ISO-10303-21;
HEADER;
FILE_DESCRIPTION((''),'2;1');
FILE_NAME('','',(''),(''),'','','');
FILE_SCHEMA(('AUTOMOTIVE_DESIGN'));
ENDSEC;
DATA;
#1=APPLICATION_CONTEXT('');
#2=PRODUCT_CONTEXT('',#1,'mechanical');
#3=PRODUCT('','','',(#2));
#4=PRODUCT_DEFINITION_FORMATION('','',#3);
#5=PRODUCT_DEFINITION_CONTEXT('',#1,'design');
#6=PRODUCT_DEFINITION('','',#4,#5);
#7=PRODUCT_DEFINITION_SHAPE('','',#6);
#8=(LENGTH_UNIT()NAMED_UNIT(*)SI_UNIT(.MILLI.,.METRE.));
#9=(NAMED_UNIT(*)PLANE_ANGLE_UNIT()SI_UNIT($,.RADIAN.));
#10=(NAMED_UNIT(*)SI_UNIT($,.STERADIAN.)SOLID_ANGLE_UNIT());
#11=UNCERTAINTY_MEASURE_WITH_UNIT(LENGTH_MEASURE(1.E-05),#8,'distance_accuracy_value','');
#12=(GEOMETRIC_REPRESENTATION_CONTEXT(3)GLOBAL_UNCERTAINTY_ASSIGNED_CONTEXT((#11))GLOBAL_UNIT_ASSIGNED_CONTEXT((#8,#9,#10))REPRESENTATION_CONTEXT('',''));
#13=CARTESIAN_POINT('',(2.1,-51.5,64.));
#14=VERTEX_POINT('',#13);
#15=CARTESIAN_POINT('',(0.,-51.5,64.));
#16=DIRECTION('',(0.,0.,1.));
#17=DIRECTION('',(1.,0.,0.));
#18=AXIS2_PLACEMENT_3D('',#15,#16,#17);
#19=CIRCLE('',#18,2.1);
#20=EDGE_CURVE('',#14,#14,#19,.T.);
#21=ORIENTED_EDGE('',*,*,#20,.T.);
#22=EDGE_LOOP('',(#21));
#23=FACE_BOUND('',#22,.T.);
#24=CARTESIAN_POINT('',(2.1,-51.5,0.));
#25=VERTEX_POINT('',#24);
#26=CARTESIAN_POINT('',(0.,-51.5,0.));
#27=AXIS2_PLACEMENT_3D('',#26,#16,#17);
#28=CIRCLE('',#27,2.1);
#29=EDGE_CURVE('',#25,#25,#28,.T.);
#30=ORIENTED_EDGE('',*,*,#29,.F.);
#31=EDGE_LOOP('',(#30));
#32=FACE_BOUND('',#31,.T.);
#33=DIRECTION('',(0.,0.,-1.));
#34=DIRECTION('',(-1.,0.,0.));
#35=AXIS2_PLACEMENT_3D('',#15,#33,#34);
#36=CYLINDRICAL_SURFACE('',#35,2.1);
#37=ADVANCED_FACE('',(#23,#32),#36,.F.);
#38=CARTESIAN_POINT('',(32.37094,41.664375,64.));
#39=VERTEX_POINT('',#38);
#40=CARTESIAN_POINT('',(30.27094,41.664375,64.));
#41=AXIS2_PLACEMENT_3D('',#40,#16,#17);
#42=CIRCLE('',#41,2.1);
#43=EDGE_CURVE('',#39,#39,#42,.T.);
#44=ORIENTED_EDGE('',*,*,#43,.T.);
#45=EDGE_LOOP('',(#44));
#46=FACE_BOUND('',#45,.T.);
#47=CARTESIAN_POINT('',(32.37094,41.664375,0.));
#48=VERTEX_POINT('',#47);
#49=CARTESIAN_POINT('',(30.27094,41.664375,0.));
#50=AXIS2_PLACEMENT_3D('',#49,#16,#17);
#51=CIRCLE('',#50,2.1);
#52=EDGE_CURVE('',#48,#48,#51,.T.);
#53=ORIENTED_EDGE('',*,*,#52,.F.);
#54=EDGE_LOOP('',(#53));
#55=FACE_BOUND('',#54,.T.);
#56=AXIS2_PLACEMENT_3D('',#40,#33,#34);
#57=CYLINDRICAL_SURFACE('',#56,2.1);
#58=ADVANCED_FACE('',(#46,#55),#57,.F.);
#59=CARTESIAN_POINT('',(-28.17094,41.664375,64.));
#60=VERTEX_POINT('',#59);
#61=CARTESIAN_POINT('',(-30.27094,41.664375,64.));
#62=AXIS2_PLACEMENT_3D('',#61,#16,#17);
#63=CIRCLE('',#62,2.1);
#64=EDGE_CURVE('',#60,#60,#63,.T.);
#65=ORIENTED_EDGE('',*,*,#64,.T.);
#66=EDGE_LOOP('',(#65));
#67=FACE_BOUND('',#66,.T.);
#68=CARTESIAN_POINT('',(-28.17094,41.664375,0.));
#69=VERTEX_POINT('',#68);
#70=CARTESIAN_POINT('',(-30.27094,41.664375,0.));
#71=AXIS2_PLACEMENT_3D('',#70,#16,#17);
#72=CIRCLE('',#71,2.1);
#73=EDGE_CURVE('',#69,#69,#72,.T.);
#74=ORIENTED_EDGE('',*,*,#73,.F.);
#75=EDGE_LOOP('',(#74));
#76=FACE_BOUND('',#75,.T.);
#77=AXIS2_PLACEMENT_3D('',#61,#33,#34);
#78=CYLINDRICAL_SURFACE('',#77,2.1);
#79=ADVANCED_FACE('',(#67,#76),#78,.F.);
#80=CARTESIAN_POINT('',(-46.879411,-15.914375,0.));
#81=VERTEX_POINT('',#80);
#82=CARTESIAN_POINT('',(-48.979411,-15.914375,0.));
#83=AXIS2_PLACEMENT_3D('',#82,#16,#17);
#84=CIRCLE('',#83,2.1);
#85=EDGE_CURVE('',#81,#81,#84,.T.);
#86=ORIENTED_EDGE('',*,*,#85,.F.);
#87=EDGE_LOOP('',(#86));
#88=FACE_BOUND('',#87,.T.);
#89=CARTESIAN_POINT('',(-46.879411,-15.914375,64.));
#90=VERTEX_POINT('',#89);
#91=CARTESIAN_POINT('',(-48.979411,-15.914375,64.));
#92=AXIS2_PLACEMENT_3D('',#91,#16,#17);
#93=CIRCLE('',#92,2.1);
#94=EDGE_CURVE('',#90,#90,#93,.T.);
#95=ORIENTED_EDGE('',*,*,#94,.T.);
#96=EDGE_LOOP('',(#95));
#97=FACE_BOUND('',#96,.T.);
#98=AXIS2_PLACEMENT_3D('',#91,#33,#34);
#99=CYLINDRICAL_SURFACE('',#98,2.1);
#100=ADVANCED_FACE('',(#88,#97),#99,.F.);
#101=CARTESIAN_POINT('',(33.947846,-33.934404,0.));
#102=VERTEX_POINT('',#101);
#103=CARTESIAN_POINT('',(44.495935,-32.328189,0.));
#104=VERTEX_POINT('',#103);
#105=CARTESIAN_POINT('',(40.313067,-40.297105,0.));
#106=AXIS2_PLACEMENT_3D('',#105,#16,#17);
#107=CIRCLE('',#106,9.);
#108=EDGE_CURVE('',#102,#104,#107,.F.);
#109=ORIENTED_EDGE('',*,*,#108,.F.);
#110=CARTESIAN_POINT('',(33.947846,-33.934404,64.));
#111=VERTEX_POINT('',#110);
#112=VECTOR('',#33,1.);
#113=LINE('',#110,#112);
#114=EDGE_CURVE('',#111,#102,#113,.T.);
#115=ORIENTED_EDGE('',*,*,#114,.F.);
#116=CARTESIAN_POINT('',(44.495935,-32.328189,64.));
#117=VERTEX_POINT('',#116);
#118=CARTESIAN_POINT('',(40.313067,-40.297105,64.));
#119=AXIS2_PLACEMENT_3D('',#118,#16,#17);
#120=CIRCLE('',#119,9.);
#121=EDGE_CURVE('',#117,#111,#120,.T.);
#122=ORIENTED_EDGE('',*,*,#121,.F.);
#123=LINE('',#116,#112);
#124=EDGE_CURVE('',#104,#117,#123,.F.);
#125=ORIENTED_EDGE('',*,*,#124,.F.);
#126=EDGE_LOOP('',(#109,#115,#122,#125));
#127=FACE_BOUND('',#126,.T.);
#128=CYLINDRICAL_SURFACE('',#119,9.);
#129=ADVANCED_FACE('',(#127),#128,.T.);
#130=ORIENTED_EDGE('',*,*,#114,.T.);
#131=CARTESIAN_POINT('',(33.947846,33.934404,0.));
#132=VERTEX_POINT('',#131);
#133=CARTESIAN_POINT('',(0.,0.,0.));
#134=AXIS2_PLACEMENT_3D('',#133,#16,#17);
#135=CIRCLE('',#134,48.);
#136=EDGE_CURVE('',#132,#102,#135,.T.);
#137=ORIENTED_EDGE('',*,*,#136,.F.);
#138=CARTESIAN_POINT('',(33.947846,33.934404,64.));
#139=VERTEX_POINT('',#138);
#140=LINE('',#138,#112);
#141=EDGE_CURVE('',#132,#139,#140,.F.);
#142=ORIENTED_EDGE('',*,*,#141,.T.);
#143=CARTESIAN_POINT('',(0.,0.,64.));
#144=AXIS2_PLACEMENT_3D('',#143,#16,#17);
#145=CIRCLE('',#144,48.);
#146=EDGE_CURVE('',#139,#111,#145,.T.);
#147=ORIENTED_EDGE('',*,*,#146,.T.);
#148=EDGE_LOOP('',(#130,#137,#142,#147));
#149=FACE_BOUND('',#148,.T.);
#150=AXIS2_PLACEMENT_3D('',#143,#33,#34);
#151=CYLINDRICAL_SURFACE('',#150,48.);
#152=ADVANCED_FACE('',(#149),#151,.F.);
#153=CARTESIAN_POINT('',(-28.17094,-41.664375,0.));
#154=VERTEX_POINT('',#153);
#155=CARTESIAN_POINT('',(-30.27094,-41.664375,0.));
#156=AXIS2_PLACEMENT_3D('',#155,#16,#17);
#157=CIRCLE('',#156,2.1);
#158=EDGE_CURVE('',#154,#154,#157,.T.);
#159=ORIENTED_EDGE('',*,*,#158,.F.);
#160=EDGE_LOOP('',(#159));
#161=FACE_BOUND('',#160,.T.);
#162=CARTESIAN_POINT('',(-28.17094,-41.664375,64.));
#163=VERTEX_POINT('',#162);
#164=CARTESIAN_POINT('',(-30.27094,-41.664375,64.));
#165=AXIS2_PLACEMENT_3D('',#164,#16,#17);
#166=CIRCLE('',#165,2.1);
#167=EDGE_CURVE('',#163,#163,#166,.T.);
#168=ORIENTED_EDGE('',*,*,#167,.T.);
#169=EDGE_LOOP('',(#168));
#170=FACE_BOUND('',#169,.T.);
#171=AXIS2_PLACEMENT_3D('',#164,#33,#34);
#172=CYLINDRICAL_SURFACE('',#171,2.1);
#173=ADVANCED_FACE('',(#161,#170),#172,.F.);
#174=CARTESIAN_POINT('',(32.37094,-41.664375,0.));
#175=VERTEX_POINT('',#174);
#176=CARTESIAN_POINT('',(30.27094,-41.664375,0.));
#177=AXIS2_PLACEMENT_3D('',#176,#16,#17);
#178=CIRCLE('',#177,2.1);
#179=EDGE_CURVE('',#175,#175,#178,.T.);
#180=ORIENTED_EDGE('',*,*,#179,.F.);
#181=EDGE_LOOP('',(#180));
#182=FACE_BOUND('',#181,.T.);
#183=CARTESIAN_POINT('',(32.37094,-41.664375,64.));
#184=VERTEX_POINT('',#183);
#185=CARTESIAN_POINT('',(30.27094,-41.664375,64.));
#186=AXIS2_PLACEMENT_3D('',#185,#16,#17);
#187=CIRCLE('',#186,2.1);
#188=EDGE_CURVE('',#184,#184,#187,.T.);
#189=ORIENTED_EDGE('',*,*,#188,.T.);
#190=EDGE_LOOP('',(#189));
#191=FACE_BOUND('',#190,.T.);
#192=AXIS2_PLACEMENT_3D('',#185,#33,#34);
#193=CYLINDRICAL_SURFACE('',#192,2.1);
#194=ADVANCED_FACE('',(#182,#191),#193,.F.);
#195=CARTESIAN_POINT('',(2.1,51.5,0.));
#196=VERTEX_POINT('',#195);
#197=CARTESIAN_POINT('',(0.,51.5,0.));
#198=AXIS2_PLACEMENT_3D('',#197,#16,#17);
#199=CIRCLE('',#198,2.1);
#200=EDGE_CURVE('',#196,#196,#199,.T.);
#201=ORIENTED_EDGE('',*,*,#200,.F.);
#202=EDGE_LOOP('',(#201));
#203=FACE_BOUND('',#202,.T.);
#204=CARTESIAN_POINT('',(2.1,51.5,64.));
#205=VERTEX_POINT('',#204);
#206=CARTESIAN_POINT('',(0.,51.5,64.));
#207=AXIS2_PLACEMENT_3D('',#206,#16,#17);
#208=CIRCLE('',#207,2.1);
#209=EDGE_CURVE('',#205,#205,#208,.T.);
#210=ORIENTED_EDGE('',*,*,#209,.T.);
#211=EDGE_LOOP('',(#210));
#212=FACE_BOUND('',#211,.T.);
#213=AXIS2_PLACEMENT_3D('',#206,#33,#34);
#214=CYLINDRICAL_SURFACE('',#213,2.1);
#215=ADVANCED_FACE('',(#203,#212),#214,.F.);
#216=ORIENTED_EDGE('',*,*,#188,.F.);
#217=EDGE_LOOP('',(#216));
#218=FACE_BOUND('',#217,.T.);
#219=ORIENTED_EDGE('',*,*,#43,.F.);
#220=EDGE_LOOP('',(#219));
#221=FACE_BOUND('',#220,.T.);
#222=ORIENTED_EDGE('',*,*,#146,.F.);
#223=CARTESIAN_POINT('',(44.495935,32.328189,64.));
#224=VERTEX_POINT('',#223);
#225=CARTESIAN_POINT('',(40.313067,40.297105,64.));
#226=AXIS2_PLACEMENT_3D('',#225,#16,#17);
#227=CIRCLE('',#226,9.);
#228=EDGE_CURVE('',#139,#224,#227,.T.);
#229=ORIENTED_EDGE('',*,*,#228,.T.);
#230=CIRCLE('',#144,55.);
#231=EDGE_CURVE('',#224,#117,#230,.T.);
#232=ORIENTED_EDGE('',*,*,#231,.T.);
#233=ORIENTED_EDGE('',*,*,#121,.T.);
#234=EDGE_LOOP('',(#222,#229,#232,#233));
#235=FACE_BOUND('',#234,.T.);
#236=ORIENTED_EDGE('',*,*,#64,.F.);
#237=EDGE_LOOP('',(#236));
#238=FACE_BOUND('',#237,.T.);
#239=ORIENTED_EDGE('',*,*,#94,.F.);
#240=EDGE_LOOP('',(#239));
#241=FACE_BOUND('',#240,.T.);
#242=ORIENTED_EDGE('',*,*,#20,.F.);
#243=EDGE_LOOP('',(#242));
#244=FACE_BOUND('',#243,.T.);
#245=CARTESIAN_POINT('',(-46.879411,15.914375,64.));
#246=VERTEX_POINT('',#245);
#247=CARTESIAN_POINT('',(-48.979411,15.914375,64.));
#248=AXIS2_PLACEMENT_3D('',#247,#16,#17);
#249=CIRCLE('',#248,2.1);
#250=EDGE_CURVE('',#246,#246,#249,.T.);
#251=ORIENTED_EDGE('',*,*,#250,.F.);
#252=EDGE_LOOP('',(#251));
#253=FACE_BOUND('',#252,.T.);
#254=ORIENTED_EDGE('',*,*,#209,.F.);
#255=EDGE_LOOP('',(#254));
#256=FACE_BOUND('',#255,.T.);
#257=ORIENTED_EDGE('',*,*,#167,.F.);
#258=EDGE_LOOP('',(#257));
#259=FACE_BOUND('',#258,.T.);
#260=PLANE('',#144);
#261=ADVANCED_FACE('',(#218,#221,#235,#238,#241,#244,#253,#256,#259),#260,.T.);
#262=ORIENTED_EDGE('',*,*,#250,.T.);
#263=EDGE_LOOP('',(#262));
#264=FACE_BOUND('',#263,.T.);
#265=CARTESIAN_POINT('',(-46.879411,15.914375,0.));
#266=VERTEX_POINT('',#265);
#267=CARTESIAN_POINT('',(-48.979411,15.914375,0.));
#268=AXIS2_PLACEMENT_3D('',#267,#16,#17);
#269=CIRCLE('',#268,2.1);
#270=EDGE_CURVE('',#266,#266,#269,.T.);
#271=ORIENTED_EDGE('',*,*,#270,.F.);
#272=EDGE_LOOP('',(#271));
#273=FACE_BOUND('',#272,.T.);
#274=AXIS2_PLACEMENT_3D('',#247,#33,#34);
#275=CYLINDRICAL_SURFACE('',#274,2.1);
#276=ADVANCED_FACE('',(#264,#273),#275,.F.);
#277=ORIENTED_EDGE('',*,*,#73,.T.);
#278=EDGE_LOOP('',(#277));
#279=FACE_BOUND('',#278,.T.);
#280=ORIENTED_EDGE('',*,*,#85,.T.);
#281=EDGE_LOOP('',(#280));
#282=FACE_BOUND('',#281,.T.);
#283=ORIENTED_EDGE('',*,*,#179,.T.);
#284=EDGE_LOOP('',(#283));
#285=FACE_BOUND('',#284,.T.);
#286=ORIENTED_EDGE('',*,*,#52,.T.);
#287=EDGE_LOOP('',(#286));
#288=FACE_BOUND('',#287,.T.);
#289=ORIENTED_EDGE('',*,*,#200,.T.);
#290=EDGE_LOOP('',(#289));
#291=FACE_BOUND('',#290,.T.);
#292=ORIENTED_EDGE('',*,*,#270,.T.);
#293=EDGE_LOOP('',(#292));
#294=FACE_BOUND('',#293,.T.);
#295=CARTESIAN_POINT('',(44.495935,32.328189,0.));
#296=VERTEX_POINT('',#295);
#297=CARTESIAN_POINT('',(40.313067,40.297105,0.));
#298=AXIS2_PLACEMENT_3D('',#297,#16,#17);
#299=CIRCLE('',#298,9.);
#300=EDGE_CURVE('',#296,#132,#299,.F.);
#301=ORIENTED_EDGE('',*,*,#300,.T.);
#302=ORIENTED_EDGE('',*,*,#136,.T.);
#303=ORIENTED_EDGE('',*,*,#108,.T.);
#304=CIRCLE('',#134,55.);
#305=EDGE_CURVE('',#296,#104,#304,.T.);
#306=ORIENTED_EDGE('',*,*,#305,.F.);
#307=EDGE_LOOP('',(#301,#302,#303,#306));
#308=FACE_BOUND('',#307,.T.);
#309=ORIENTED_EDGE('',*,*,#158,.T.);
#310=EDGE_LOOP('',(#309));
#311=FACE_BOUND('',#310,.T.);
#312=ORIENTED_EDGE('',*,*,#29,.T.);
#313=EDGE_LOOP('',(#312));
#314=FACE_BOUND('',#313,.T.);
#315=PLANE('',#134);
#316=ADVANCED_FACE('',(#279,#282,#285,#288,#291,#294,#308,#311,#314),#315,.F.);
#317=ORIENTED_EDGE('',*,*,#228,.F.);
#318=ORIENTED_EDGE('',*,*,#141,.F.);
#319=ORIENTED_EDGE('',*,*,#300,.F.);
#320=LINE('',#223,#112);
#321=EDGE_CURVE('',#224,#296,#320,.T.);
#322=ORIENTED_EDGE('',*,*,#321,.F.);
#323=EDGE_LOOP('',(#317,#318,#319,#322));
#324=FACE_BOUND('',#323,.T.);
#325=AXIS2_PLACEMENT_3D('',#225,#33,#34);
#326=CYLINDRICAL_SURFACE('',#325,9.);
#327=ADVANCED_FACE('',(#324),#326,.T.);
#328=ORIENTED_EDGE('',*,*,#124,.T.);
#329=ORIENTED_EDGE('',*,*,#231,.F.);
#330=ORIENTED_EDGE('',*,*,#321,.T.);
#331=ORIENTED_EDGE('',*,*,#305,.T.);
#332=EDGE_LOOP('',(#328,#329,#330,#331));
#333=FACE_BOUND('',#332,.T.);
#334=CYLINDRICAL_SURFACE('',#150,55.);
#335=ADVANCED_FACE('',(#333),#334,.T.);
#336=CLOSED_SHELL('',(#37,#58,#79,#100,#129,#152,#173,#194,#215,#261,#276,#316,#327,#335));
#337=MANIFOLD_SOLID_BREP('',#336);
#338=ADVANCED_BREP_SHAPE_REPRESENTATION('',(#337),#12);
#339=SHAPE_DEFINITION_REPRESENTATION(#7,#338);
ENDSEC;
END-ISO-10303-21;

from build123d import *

# Parameters (mm, degrees)
ESQUISSE1_R             = 55
ESQUISSE1_R_2           = 48
ESQUISSE1_R_3           = 2.1
BOSS_EXTRU_1_DEPTH      = 64
ENL_V_MAT_EXTRU_1_DEPTH = 101.727354775
CONG_1_R                = 9


with BuildPart() as part:
    # Esquisse1 → Boss.-Extru.1 (new body)
    with BuildSketch(Plane.XY):
        Circle(ESQUISSE1_R)
        Circle(ESQUISSE1_R_2, mode=Mode.SUBTRACT)
        with Locations((0, 51.5)):
            Circle(ESQUISSE1_R_3, mode=Mode.SUBTRACT)
        with Locations((30.270940493, 41.66437521)):
            Circle(ESQUISSE1_R_3, mode=Mode.SUBTRACT)
        with Locations((48.979410589, 15.91437521)):
            Circle(ESQUISSE1_R_3, mode=Mode.SUBTRACT)
        with Locations((48.979410589, -15.91437521)):
            Circle(ESQUISSE1_R_3, mode=Mode.SUBTRACT)
        with Locations((30.270940493, -41.66437521)):
            Circle(ESQUISSE1_R_3, mode=Mode.SUBTRACT)
        with Locations((0, -51.5)):
            Circle(ESQUISSE1_R_3, mode=Mode.SUBTRACT)
        with Locations((-30.270940493, -41.66437521)):
            Circle(ESQUISSE1_R_3, mode=Mode.SUBTRACT)
        with Locations((-48.979410589, -15.91437521)):
            Circle(ESQUISSE1_R_3, mode=Mode.SUBTRACT)
        with Locations((-48.979410589, 15.91437521)):
            Circle(ESQUISSE1_R_3, mode=Mode.SUBTRACT)
        with Locations((-30.270940493, 41.66437521)):
            Circle(ESQUISSE1_R_3, mode=Mode.SUBTRACT)
    extrude(amount=BOSS_EXTRU_1_DEPTH)

    # Esquisse3 → Enlèv. mat.-Extru.1 (cut, through all)
    with BuildSketch(Plane.XY.offset(64)):
        Polygon((0, 0), (60, 43.59255168), (60, -43.59255168), align=None)
    extrude(amount=-ENL_V_MAT_EXTRU_1_DEPTH, mode=Mode.SUBTRACT)

    # Congé1
    # the kernel refuses this fillet: 9 mm, written as the material it takes off along each edge
    with BuildSketch(Plane(origin=(38.83281573, -28.21369211, 82.806493839), x_dir=(0.809016994374856, -0.5877852522925988, 0), z_dir=(0, 0, -1))) as cong_1_piece_1:
        with BuildLine():
            CenterArc((8.3, 8.905616206), CONG_1_R, 188.98865434, 72.706236132)
            Line((-0.589473684, 7.499466278), (-0.767263158, 7.47134328))
            ThreePointArc((-0.767263158, 7.47134328), (-0.327041859, 3.747193897), (-0.18, 0))
            Line((-0.18, 0), (0, -0.18))
            ThreePointArc((0, -0.18), (3.5, -0.18), (6.974, -0.178112324))
            Line((6.974, -0.178112324), (7, 0))
        make_face()
    extrude(amount=101.612987679, mode=Mode.SUBTRACT)
    with BuildSketch(Plane(origin=(38.83281573, 28.21369211, 82.806493839), x_dir=(0.8090169943748586, 0.5877852522925953, 0), z_dir=(0, 0, -1))) as cong_1_piece_2:
        with BuildLine():
            CenterArc((8.3, -8.905616206), CONG_1_R, 98.305109528, 72.706236132)
            Line((-0.589473684, -7.499466278), (-0.767263158, -7.47134328))
            ThreePointArc((-0.767263158, -7.47134328), (-0.327041859, -3.747193897), (-0.18, 0))
            Line((-0.18, 0), (0, 0.18))
            ThreePointArc((0, 0.18), (3.5, 0.18), (6.974, 0.178112324))
            Line((6.974, 0.178112324), (7, 0))
        make_face()
    extrude(amount=101.612987679, mode=Mode.SUBTRACT)


solid = part.part
